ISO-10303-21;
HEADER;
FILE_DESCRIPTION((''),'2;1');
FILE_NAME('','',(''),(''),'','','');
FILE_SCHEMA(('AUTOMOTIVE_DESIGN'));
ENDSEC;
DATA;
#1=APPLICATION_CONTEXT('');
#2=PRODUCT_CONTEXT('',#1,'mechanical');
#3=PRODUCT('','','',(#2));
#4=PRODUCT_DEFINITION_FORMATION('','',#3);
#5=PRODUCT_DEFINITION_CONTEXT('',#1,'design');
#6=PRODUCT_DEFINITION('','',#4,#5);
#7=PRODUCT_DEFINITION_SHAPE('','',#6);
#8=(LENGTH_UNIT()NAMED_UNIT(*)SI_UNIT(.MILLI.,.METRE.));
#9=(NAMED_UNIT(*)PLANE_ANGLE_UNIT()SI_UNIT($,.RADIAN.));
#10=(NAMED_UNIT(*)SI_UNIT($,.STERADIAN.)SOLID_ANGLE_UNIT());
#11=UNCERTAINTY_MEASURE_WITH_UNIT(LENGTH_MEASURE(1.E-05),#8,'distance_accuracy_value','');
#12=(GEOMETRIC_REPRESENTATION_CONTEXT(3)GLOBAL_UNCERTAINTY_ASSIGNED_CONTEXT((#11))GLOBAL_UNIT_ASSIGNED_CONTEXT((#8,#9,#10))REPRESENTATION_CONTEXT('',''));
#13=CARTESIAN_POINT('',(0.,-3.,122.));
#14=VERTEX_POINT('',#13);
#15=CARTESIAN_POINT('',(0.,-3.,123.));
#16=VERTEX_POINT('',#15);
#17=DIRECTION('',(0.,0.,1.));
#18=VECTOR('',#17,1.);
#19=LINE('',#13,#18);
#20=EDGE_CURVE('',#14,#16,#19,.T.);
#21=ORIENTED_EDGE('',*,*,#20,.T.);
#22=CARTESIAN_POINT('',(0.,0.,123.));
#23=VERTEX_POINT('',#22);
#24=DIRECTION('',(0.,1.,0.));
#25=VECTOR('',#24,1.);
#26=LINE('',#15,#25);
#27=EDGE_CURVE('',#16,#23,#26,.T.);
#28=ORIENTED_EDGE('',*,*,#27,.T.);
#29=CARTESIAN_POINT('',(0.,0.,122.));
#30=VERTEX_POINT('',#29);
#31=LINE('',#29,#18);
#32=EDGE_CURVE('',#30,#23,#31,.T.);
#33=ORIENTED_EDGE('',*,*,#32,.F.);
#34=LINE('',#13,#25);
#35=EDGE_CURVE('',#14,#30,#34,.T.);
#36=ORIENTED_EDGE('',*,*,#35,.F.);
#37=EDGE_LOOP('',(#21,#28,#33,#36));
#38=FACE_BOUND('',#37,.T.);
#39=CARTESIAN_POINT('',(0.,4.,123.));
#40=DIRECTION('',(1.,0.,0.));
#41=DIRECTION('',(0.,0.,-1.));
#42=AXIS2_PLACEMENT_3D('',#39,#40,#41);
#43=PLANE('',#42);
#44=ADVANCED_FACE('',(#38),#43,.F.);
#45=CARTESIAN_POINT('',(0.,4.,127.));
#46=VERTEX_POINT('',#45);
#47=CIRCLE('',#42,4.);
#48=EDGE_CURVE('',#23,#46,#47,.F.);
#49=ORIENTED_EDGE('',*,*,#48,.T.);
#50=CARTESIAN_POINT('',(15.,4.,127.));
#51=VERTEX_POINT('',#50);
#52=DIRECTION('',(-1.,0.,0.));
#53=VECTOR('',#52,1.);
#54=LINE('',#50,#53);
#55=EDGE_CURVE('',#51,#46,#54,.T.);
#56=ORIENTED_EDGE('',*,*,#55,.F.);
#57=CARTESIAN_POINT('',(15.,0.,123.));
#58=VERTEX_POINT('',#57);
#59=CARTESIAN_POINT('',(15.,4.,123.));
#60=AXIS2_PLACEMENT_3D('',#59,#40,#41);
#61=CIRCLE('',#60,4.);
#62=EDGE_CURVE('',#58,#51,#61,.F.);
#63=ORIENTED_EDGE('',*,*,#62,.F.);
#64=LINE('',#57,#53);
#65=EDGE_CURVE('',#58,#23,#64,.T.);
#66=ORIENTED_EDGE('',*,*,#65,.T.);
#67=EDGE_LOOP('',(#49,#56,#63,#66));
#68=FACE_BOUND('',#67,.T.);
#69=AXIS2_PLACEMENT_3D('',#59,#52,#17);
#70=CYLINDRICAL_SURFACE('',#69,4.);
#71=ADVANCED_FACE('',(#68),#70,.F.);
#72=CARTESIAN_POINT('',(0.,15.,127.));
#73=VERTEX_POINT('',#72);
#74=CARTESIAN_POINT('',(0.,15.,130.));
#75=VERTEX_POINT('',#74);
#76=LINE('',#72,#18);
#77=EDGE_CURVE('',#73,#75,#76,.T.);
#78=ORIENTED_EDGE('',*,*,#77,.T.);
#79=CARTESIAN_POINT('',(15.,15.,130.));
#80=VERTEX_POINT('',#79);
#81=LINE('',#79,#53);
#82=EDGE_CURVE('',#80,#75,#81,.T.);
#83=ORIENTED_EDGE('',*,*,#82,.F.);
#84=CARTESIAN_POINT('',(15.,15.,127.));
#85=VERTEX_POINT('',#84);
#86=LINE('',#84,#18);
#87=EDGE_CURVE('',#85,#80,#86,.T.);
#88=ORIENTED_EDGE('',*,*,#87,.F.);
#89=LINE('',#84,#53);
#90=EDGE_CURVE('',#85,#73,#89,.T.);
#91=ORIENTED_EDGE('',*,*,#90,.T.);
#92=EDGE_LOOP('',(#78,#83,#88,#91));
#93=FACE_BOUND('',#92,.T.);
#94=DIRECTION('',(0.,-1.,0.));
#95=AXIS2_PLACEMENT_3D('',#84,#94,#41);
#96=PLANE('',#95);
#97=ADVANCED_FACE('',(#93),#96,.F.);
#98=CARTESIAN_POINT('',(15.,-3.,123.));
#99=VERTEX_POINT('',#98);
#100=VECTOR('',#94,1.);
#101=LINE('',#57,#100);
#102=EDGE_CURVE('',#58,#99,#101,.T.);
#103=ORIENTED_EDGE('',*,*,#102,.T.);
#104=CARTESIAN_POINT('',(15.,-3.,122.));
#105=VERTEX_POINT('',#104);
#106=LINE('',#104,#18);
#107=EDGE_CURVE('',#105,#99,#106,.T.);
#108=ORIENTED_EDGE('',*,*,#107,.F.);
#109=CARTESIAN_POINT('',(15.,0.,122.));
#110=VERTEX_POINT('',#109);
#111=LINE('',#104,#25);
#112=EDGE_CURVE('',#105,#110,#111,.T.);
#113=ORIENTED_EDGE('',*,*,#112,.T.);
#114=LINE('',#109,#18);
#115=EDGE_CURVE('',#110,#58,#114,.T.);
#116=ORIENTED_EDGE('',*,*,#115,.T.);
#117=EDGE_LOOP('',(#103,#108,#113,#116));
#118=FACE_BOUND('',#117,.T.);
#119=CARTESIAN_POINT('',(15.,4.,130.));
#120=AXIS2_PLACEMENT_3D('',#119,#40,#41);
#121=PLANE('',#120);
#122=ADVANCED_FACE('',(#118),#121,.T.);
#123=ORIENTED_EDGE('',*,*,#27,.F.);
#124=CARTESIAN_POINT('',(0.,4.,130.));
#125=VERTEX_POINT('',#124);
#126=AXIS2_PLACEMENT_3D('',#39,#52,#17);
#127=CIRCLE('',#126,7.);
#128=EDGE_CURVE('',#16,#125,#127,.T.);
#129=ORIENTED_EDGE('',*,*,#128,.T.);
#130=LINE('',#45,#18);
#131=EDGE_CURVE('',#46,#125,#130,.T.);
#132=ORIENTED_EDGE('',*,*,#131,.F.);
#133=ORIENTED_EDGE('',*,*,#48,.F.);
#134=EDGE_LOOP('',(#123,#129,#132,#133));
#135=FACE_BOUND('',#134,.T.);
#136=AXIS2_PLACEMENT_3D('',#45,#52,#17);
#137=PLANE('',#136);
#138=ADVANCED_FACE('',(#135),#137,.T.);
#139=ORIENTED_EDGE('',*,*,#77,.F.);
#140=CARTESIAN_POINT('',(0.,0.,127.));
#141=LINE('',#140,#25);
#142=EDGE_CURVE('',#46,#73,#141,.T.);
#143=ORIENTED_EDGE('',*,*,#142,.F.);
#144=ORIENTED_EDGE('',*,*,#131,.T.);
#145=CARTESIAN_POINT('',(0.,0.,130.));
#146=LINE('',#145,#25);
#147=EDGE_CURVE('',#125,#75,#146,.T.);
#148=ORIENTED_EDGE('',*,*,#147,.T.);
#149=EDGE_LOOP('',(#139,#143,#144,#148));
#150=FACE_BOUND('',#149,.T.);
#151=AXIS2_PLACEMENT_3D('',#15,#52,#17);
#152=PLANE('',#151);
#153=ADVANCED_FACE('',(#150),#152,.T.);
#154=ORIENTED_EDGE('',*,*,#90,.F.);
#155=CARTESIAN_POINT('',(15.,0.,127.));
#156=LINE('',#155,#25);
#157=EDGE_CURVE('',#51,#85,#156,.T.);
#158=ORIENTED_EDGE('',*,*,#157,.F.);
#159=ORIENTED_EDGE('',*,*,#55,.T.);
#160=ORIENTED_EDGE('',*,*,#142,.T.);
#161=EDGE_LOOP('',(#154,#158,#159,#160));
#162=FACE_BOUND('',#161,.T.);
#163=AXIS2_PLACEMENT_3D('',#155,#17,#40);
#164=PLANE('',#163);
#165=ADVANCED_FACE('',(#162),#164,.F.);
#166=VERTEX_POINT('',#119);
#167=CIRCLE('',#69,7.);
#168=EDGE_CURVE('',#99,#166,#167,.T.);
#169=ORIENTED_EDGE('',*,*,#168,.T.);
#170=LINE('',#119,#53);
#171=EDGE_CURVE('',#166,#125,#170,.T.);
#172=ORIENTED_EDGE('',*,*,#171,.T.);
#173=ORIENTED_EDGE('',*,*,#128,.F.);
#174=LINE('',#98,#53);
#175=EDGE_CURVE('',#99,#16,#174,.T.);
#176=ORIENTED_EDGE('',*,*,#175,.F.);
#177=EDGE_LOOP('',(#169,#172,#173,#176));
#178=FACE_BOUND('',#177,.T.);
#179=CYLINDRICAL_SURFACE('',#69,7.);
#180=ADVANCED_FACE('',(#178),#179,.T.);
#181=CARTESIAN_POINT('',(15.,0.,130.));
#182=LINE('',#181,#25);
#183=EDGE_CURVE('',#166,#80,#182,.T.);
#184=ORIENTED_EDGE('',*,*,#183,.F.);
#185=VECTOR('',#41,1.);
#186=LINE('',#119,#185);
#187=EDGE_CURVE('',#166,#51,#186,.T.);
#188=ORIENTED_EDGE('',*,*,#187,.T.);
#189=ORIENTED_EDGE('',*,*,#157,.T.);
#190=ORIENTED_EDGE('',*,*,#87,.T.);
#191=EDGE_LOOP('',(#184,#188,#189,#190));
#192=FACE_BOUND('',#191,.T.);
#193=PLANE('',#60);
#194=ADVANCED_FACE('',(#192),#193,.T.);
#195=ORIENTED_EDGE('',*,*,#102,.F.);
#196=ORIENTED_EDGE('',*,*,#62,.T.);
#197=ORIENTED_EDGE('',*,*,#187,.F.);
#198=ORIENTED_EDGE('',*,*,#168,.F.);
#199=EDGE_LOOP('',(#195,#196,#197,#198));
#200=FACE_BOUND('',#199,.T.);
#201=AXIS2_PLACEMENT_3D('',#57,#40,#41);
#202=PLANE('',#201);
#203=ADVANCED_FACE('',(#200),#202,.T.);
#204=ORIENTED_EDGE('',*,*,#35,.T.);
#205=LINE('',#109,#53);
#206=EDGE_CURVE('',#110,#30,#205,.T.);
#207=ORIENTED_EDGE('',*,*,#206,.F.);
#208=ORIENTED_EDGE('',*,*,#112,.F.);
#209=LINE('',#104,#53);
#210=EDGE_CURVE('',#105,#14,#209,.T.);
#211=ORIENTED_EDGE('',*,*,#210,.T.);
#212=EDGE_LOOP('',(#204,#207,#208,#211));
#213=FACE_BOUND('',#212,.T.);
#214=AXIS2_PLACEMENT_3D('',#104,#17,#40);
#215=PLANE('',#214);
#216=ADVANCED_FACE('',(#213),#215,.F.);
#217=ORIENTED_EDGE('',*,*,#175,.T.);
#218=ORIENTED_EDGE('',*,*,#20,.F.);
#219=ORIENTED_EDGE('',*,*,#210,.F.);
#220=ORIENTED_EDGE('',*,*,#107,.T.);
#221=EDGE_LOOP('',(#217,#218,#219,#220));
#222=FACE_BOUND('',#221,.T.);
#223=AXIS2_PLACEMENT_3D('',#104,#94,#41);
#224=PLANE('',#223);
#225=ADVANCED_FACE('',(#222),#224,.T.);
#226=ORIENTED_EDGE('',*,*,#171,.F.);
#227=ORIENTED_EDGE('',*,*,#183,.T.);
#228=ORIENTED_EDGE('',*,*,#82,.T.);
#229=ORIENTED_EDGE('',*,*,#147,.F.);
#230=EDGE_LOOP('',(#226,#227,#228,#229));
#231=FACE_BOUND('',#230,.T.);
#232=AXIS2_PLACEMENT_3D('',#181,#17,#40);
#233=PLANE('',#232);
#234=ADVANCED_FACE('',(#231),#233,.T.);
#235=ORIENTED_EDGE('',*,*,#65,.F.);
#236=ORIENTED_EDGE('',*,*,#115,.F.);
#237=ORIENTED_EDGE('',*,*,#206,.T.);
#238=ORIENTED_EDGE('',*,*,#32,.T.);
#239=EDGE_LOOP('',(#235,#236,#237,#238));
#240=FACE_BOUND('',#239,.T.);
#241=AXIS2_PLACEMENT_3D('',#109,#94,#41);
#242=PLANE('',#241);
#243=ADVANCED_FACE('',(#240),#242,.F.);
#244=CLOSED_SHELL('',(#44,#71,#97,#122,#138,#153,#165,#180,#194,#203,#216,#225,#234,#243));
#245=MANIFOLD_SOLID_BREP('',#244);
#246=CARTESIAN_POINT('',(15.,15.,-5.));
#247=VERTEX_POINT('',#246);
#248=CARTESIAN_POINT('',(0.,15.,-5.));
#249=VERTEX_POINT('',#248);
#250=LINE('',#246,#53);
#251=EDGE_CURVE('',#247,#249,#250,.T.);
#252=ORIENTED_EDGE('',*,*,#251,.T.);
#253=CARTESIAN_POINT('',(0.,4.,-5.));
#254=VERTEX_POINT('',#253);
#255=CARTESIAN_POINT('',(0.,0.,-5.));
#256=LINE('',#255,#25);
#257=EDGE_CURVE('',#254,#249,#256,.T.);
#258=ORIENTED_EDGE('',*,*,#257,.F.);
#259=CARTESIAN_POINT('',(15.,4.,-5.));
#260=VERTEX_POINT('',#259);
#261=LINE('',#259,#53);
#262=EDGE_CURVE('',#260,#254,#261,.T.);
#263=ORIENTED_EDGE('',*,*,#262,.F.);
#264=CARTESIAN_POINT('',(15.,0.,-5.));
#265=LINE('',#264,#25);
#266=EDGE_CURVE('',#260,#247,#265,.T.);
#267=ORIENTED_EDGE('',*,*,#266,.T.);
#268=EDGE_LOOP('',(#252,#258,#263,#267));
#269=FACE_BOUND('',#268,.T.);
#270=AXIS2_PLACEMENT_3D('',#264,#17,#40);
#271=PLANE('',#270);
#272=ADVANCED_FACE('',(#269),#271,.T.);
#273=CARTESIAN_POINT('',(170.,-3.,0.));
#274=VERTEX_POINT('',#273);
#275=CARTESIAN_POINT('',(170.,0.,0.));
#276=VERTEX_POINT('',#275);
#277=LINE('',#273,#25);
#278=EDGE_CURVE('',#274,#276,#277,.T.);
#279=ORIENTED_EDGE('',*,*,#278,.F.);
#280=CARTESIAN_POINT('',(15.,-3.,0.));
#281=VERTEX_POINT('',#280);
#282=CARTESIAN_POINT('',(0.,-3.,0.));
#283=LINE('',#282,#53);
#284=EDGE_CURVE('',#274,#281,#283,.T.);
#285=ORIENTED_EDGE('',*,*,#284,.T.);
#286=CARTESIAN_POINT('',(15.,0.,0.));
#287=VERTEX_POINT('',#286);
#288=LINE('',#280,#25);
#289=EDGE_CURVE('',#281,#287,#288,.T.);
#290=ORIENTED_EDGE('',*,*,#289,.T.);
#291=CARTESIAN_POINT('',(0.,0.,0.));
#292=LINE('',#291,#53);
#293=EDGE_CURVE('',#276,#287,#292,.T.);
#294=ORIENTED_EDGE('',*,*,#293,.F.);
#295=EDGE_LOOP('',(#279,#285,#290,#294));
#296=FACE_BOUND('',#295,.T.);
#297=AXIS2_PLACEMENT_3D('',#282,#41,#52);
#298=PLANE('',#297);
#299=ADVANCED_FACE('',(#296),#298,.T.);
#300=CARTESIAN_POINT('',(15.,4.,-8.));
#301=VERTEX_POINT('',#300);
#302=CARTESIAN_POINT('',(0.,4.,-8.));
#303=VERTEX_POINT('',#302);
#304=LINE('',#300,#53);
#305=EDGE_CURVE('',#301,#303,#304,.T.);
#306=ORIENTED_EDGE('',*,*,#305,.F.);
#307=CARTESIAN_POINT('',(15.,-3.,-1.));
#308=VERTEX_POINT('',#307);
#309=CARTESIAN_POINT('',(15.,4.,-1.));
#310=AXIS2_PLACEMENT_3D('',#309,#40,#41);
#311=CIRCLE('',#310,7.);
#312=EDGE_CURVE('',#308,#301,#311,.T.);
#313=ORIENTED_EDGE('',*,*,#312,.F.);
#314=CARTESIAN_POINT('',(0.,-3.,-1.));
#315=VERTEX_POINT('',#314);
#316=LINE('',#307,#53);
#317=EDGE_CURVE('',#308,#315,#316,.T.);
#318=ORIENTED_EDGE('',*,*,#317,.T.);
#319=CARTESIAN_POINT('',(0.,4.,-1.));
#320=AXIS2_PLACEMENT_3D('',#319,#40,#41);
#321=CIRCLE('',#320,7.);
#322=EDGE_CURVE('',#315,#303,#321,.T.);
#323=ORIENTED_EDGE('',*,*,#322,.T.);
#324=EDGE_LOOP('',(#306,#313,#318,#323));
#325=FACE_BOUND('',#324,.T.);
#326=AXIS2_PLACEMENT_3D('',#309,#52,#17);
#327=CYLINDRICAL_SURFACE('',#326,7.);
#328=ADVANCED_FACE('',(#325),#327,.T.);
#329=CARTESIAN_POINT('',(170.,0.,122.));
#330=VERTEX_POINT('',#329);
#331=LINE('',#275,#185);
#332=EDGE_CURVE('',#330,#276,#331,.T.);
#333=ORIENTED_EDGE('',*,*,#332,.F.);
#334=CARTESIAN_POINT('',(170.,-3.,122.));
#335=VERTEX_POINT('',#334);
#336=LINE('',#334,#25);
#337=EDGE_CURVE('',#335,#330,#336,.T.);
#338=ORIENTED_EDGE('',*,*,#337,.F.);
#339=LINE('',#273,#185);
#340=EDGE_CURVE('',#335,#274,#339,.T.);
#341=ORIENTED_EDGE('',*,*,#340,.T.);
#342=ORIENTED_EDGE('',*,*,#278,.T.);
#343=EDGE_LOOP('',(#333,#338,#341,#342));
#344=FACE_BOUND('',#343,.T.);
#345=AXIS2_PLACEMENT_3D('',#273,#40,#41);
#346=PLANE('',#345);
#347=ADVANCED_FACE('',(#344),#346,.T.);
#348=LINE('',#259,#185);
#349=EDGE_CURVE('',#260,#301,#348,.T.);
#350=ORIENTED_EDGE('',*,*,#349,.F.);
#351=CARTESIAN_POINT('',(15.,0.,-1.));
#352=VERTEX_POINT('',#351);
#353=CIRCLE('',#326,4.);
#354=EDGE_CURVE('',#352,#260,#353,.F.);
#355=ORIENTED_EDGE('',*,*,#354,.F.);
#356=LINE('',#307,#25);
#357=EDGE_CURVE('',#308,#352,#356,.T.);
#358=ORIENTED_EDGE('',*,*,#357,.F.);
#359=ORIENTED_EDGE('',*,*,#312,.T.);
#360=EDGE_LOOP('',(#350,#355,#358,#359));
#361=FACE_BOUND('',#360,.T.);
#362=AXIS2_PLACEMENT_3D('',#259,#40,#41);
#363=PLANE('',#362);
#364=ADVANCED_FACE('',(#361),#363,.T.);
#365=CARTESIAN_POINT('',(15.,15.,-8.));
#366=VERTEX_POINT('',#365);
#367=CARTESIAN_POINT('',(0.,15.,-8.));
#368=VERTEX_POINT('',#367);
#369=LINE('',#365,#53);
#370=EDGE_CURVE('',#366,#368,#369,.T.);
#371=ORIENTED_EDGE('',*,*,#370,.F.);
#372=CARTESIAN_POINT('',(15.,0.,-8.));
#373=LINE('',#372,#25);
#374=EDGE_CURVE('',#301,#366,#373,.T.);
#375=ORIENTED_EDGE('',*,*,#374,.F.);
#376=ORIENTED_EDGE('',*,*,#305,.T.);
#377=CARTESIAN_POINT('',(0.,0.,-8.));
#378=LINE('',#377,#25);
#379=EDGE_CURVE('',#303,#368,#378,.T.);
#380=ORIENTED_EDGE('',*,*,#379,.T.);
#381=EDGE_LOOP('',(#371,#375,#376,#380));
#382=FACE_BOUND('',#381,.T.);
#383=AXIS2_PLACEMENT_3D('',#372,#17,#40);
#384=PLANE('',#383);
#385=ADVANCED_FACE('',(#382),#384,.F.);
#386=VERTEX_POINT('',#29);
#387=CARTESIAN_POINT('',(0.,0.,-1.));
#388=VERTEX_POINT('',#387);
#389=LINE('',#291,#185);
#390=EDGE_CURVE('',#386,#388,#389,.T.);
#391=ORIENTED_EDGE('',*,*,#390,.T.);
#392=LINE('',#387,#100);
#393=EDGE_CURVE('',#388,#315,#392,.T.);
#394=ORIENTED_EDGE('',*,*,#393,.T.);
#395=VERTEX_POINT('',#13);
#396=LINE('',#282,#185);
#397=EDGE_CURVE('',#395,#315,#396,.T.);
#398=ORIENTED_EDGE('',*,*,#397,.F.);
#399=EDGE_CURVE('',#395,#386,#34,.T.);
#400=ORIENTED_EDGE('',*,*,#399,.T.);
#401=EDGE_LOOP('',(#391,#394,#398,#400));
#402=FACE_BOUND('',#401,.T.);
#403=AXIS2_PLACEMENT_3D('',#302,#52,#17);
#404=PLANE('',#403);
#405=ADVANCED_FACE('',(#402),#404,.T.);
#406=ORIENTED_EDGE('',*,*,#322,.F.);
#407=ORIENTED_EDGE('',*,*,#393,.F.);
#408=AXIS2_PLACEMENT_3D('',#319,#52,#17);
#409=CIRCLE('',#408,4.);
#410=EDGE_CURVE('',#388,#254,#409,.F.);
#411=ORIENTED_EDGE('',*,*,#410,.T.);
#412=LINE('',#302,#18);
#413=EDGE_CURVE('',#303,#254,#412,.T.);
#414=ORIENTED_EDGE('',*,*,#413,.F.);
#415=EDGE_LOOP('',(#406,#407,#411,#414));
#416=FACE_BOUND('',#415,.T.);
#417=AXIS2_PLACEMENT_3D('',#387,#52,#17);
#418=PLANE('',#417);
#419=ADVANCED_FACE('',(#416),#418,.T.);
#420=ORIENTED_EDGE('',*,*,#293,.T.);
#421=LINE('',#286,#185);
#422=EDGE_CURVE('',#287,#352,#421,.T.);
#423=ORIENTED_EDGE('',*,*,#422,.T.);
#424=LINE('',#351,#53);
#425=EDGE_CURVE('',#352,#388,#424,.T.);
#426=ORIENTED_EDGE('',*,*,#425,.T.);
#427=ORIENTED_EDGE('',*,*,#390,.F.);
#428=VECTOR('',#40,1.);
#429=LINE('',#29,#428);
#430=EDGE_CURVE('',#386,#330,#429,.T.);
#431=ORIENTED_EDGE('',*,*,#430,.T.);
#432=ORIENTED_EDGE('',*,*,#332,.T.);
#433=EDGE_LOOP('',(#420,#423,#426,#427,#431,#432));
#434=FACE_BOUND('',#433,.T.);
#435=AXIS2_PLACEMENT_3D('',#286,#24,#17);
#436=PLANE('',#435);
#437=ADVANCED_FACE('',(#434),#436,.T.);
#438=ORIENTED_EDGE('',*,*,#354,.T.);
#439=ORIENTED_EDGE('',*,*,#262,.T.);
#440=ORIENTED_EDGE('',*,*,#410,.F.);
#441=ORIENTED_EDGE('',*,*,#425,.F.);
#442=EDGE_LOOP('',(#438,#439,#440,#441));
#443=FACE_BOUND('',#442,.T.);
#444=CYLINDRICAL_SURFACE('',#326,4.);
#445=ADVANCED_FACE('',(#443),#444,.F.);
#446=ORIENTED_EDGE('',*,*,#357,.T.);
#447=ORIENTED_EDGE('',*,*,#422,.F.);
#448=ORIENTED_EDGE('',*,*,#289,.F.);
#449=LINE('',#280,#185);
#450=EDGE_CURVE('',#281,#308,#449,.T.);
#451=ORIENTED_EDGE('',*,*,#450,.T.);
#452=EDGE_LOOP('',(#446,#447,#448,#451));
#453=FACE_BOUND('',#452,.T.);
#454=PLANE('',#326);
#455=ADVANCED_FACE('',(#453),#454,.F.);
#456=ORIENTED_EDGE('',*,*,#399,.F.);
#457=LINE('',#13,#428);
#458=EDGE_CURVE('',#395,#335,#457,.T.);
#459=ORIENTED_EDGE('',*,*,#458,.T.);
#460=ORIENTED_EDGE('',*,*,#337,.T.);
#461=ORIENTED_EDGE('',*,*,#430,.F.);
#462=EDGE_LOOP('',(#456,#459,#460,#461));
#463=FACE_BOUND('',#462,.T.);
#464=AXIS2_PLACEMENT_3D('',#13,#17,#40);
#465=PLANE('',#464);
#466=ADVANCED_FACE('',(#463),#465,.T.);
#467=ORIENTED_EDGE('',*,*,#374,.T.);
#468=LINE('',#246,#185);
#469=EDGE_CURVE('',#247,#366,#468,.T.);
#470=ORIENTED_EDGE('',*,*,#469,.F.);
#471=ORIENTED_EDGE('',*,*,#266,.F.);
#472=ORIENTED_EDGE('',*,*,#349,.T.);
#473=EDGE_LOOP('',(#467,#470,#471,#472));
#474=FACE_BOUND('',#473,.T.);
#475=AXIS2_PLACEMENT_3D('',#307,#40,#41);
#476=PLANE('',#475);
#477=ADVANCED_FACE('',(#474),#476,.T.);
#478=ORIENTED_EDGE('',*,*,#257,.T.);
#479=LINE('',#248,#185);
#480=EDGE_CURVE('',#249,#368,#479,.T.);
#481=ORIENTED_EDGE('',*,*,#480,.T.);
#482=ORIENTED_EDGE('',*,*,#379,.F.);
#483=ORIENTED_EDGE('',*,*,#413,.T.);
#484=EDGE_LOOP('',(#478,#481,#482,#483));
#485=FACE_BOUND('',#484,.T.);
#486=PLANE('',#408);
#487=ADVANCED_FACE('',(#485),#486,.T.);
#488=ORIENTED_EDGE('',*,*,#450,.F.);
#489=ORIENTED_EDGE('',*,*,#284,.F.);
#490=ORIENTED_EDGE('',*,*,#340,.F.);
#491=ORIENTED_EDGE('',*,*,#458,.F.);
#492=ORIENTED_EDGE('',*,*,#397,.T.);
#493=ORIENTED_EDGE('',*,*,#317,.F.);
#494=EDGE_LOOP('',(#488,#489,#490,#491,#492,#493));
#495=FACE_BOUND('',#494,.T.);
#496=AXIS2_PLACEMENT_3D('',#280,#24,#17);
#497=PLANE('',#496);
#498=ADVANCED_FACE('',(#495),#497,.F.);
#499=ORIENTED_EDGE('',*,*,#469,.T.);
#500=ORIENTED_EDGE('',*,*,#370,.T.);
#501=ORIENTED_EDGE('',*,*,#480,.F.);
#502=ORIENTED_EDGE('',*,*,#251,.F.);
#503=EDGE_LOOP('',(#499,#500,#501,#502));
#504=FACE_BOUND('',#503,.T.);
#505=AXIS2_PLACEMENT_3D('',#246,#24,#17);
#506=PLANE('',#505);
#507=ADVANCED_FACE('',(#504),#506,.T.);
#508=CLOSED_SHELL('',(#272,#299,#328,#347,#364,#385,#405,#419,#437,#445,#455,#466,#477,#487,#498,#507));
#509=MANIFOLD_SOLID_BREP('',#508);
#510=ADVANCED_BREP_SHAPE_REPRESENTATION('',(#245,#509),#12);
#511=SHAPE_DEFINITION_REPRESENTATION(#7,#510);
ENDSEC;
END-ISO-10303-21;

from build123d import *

# Parameters (mm, degrees)
BRIDA_BASE1_DEPTH       = 15
CROQUIS6_W              = 170
CROQUIS6_H              = 122
SALIENTE_EXTRUIR1_DEPTH = 3
BRIDA_BASE2_DEPTH       = 15


# Sheet-metal steps are written as plain solids
with BuildPart() as part:
    # Croquis1 → Brida base1 (new body)
    with BuildSketch(Plane(origin=(0, 0, 0), x_dir=(0, 0, -1), z_dir=(1, 0, 0))):
        with BuildLine():
            Line((0, 0), (1, 0))
            ThreePointArc((1, 0), (3.828427125, 1.171572875), (5, 4))
            Line((5, 4), (5, 15))
            Line((5, 15), (8, 15))
            Line((8, 15), (8, 4))
            ThreePointArc((8, 4), (5.949747468, -0.949747468), (1, -3))
            Line((1, -3), (0, -3))
            Line((0, -3), (0, 0))
        make_face()
    extrude(amount=BRIDA_BASE1_DEPTH)

    # Croquis6 → Saliente-Extruir1 (add)
    with BuildSketch(Plane(origin=(0, 0, 0), x_dir=(1, 0, 0), z_dir=(0, 1, 0))):
        with Locations((85, -61)):
            Rectangle(CROQUIS6_W, CROQUIS6_H)
    extrude(amount=-SALIENTE_EXTRUIR1_DEPTH)


with BuildPart() as body_2:
    # Croquis7 → Brida base2 (new body)
    with BuildSketch(Plane.ZY):
        with BuildLine():
            Line((122, 0), (123, 0))
            ThreePointArc((123, 0), (125.828427125, 1.171572875), (127, 4))
            Line((127, 4), (127, 15))
            Line((127, 15), (130, 15))
            Line((130, 15), (130, 4))
            ThreePointArc((130, 4), (127.949747468, -0.949747468), (123, -3))
            Line((123, -3), (122, -3))
            Line((122, -3), (122, 0))
        make_face()
    extrude(amount=-BRIDA_BASE2_DEPTH)


solid = Compound([part.part, body_2.part])
